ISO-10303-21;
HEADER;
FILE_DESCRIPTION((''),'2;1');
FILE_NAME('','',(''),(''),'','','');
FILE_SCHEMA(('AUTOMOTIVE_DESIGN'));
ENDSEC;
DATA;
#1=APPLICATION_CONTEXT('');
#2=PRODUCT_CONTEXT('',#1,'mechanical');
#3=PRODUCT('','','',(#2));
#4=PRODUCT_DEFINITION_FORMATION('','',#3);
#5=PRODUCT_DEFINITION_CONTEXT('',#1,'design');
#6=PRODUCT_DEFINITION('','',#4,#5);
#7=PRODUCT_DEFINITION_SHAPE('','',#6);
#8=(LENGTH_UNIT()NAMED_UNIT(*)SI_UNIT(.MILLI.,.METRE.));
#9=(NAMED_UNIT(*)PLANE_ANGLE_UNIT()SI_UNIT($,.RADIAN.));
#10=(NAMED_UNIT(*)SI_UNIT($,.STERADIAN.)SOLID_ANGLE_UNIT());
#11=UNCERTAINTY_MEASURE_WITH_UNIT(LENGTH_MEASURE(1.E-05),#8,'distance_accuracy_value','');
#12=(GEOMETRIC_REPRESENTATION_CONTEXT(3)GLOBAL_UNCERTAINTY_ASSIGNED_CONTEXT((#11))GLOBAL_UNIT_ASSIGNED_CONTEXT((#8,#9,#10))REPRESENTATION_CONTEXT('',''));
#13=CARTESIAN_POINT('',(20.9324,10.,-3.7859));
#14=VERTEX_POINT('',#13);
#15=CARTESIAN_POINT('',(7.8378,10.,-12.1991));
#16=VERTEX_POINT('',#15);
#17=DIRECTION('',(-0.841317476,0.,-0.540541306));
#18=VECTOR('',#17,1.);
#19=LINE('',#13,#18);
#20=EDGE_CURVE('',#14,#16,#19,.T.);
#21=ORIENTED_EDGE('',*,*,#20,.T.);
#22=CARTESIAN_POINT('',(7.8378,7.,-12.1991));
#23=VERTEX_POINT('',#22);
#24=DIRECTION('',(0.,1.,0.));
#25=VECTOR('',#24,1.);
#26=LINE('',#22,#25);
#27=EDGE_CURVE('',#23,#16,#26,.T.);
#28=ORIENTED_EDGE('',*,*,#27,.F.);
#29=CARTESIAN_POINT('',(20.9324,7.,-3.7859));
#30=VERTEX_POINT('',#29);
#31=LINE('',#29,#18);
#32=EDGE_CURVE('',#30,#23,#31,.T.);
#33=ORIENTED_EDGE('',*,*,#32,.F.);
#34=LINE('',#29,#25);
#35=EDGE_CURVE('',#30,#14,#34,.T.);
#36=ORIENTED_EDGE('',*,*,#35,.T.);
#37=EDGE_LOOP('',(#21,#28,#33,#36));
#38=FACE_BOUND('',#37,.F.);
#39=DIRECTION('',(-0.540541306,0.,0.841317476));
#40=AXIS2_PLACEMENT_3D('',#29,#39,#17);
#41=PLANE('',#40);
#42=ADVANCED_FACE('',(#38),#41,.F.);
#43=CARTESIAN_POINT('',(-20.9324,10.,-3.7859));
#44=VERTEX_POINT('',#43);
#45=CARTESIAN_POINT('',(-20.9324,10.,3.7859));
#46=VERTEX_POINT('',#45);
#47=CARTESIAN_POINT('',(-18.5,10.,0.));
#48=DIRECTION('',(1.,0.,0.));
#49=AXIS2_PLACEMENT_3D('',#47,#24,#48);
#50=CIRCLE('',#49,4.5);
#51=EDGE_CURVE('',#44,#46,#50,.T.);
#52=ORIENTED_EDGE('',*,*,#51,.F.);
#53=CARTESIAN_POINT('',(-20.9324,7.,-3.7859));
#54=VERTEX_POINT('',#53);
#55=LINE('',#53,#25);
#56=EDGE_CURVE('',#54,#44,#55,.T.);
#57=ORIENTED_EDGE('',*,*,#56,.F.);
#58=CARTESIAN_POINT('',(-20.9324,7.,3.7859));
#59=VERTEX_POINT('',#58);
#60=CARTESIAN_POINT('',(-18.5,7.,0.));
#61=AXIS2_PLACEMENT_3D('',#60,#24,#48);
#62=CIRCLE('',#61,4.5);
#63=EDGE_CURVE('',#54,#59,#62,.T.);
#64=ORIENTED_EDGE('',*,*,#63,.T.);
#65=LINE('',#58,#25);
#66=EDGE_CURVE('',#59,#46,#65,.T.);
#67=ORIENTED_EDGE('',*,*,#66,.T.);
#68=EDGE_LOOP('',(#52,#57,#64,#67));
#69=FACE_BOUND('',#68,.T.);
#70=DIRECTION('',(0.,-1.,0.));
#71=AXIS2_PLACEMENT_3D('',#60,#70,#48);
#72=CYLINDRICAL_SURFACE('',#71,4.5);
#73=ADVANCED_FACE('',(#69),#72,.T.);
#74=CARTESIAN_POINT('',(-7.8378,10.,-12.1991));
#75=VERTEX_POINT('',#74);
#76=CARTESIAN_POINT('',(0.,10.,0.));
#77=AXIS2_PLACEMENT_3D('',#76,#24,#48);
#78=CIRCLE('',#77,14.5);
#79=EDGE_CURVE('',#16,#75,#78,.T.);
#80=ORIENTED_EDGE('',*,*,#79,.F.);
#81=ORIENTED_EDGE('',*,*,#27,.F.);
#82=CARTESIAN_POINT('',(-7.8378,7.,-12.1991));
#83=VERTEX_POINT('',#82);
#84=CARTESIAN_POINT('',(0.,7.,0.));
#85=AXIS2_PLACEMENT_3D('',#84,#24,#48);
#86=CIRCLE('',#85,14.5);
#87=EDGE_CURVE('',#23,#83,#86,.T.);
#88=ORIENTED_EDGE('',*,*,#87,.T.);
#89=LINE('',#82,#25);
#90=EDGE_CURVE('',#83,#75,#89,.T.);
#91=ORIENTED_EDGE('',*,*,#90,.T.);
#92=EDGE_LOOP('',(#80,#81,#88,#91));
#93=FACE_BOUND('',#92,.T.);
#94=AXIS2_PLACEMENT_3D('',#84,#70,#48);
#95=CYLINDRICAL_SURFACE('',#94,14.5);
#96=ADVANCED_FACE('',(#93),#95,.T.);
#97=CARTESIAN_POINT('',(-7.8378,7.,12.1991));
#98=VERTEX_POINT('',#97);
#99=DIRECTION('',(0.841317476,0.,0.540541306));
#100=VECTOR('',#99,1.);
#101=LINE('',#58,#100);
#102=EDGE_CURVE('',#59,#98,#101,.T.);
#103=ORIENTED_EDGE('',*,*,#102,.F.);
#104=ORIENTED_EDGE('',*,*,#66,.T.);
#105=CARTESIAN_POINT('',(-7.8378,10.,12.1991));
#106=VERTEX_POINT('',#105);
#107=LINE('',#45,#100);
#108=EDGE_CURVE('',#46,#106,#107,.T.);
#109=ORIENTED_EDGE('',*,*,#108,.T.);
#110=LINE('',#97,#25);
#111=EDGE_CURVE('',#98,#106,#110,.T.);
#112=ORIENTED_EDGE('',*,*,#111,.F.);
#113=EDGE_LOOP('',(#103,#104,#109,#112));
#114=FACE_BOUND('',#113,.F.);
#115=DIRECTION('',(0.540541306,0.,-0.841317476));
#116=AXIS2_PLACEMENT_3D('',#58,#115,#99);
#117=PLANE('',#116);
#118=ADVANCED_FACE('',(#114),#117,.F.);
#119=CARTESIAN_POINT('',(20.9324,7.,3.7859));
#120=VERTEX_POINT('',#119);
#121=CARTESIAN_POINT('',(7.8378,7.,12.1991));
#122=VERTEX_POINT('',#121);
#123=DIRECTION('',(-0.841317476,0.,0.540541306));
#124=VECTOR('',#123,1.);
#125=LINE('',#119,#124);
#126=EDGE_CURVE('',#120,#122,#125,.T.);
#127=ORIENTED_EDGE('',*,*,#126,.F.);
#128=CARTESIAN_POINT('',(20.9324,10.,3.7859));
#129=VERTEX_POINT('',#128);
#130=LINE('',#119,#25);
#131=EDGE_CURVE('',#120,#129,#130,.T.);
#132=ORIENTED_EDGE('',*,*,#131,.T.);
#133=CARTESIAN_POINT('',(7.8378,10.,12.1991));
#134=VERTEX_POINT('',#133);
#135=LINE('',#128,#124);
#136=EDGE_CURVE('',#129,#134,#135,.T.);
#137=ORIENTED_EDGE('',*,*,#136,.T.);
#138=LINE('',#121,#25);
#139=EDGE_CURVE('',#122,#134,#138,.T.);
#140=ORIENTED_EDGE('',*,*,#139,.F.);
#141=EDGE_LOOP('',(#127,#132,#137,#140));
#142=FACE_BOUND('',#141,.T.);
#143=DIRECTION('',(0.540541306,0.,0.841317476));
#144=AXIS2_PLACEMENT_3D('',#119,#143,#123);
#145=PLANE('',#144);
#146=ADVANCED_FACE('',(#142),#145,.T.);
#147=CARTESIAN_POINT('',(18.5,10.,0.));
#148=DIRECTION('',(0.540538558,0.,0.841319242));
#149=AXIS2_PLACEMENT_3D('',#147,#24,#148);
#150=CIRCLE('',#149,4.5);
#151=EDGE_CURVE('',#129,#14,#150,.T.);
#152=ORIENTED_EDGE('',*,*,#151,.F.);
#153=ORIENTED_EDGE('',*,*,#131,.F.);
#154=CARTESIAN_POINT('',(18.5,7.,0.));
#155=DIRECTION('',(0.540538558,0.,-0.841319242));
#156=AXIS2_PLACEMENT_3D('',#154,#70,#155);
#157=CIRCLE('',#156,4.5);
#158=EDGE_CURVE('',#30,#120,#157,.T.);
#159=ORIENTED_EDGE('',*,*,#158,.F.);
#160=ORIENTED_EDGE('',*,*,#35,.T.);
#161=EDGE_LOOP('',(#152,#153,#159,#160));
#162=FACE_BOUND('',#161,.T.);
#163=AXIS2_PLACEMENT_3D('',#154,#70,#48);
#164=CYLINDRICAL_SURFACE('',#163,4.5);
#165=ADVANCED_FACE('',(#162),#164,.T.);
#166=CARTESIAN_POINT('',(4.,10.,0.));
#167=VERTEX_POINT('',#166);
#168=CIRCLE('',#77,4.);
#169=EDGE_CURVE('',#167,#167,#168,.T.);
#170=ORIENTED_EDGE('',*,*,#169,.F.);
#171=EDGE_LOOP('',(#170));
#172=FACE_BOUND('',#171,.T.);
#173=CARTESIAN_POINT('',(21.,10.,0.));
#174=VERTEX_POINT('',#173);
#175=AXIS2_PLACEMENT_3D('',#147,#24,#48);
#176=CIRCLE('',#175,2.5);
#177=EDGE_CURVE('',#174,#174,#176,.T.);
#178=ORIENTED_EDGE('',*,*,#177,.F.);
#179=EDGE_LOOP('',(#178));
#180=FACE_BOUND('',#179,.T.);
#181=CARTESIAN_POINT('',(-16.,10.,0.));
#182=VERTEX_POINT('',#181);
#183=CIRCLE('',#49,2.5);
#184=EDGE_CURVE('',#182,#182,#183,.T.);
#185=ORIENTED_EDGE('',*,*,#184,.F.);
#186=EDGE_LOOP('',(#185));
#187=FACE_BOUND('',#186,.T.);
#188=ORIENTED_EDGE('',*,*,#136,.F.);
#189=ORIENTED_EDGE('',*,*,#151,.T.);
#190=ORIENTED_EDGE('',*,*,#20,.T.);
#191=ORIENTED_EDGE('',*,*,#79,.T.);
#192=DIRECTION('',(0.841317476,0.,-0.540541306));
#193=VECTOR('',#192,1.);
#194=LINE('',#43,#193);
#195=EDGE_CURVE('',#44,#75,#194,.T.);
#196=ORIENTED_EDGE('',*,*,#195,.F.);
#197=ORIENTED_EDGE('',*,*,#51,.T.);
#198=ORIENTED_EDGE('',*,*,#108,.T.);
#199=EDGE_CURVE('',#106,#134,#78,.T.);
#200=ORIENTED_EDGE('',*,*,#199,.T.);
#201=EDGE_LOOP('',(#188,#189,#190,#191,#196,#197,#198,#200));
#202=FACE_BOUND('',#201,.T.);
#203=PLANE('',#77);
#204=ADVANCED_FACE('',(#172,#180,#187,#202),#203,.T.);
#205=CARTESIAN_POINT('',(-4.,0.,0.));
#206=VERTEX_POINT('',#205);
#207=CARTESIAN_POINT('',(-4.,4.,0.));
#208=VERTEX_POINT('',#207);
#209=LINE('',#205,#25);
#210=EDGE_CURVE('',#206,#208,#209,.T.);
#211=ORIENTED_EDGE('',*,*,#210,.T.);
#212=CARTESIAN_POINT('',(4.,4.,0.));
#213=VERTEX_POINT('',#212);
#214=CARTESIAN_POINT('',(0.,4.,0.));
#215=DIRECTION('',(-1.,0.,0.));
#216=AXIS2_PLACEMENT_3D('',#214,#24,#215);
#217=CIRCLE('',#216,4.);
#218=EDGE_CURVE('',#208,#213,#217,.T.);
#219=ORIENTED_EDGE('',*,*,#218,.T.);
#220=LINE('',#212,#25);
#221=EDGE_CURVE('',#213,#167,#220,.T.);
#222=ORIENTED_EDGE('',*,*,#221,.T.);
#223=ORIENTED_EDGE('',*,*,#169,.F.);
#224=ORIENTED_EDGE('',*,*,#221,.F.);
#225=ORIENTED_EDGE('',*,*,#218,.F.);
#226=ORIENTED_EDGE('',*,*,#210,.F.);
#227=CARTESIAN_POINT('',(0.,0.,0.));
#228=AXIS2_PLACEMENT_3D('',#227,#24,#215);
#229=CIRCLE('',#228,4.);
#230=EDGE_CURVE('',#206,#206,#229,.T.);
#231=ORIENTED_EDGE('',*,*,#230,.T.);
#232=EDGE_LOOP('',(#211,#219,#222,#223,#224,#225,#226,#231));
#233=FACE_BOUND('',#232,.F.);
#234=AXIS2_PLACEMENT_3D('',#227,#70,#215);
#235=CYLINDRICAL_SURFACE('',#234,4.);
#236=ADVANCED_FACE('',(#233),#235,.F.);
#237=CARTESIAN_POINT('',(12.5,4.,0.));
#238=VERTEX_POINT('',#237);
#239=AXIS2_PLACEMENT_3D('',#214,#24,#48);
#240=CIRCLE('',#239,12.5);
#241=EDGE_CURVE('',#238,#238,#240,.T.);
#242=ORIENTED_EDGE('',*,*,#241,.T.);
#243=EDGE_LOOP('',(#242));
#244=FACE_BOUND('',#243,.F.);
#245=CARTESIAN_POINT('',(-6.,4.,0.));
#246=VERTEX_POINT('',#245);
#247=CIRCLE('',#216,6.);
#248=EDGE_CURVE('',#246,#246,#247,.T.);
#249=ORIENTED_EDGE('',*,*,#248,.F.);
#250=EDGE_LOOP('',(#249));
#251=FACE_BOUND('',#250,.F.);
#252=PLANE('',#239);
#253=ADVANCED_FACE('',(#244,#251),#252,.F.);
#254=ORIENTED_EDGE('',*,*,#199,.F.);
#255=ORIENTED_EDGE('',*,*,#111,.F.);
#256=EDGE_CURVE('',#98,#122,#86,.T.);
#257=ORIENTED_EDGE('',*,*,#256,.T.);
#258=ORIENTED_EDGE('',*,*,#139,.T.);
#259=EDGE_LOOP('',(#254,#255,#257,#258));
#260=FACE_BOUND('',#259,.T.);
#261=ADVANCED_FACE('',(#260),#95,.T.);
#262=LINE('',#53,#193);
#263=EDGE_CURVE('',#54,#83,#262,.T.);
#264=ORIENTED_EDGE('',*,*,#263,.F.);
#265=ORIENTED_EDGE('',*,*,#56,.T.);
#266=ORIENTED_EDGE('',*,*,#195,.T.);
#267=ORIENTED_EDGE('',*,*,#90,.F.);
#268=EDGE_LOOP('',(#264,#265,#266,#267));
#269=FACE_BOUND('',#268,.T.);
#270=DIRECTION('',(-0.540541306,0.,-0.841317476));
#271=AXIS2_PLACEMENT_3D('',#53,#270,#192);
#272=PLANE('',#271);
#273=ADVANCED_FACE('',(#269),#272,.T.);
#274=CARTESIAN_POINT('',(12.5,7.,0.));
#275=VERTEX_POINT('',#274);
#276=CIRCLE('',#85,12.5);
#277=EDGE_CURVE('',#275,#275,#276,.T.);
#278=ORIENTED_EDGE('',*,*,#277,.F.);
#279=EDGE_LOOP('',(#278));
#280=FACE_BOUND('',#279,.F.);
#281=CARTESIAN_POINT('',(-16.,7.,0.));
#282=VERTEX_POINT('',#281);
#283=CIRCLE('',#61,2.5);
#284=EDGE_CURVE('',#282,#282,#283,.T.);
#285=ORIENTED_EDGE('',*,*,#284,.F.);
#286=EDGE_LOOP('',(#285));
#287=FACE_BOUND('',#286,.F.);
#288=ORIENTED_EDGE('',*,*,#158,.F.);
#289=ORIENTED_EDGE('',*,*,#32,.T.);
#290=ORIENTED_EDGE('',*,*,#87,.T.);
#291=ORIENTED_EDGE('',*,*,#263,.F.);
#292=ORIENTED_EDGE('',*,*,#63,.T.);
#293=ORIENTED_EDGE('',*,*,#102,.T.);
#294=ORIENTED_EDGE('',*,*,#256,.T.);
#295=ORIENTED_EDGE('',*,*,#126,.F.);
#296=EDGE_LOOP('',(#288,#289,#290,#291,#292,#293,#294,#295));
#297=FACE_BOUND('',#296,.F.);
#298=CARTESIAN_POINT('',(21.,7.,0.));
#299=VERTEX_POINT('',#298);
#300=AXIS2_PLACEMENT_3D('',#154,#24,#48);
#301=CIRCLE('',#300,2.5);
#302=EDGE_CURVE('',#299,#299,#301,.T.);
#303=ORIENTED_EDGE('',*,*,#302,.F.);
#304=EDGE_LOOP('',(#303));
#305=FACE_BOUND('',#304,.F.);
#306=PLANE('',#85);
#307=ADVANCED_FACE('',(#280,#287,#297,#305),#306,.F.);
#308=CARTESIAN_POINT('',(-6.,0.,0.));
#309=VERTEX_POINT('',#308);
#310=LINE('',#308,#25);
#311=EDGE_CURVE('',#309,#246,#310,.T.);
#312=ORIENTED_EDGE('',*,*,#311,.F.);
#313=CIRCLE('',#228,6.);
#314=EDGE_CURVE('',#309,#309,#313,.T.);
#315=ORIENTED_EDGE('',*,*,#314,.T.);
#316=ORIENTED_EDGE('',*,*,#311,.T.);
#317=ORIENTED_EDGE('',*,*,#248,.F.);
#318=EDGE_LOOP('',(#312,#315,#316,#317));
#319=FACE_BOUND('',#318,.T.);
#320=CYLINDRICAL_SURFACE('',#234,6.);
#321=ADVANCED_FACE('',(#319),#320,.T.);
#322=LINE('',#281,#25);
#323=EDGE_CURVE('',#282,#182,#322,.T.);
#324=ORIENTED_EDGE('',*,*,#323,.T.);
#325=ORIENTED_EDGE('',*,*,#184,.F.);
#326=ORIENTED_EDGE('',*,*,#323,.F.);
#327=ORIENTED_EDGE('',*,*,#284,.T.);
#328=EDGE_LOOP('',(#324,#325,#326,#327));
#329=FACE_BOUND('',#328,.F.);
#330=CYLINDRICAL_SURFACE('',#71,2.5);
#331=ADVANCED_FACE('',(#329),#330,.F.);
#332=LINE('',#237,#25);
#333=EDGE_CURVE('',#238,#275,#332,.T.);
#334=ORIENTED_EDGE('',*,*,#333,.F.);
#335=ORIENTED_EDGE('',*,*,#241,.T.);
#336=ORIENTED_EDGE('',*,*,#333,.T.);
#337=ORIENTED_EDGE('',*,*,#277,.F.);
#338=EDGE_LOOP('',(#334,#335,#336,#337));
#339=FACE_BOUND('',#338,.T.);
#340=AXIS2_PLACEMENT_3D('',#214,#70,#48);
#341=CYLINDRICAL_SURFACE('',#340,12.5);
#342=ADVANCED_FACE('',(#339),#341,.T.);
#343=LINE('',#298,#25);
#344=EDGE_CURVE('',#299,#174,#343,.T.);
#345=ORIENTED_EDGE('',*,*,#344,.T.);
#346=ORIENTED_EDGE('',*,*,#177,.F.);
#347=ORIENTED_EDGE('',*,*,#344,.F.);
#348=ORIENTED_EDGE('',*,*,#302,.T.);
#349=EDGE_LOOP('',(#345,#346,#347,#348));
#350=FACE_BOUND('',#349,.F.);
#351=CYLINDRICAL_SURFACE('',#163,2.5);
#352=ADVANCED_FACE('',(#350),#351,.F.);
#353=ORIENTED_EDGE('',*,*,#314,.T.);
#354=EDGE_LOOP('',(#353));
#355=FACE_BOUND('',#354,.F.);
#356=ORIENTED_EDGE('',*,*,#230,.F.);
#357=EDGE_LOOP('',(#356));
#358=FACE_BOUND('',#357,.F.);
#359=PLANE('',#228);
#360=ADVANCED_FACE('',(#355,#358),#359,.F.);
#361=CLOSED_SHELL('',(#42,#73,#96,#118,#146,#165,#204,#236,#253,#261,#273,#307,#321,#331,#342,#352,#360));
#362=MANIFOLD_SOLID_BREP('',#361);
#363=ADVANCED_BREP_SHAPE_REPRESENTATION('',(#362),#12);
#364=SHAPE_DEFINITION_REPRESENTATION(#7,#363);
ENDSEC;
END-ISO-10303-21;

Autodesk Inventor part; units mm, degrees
ref_plane "YZ Plane" through (0, 0, 0) normal (1, 0, 0) x (0, 1, 0)
ref_plane "XZ Plane" through (0, 0, 0) normal (0, 1, 0) x (-1, 0, 0)
ref_plane "XY Plane" through (0, 0, 0) normal (0, 0, 1) x (1, 0, 0)
sketch "Sketch1" plane through (0, 0, 0) normal (0, 1, 0) x (-1, 0, 0)
  circle A0 centre (0, 0) radius 4
  circle A1 centre (0, 0) radius 6
  dimension "d0" = 8
  dimension "d1" = 2
extrude "Extrusion1" add sketch "Sketch1" along normal blind 4
sketch "Sketch2" plane through (0, 4, 0) normal (0, 1, 0) x (1, 0, 0)
  circle A0 centre (0, 0) radius 12.5
  circle A1 centre (0, 0) radius 4 projected
  dimension "d4" = 25
extrude "Extrusion2" add sketch "Sketch2" along normal blind 3
sketch "Sketch3" plane through (0, 7, 0) normal (0, 1, 0) x (1, 0, 0)
  circle A0 centre (-18.5, 0) radius 2.5
  circle A1 centre (18.5, 0) radius 2.5
  circle A2 centre (0, 0) radius 12.5 construction
  circle A3 centre (0, 0) radius 14.5
  circle A4 centre (-18.5, 0) radius 4.5
  circle A5 centre (18.5, 0) radius 4.5
  line L0 (-20.9324, 3.7859) -> (-7.8378, 12.1991)
  line L1 (-20.9324, -3.7859) -> (-7.8378, -12.1991)
  line L2 (20.9324, 3.7859) -> (7.8378, 12.1991)
  line L3 (20.9324, -3.7859) -> (7.8378, -12.1991)
  circle A6 centre (0, 0) radius 4 projected
  point P0 (-14.3851, -1.8215)
  point P1 (-14.3851, 1.8215)
  point P2 (14.3851, 1.8215)
  point P3 (14.3851, -1.8215)
  dimension "d7" = 5
  dimension "d8" = 5
  dimension "d9" = 37
  dimension "d10" = 18.5
  dimension "d11" = 2
  dimension "d12" = 2
  dimension "d13" = 2
extrude "Extrusion3" add sketch "Sketch3" along normal blind 3
equation "\"d10\" = 0.5 * d9"
properties part number "screw_bracket"
